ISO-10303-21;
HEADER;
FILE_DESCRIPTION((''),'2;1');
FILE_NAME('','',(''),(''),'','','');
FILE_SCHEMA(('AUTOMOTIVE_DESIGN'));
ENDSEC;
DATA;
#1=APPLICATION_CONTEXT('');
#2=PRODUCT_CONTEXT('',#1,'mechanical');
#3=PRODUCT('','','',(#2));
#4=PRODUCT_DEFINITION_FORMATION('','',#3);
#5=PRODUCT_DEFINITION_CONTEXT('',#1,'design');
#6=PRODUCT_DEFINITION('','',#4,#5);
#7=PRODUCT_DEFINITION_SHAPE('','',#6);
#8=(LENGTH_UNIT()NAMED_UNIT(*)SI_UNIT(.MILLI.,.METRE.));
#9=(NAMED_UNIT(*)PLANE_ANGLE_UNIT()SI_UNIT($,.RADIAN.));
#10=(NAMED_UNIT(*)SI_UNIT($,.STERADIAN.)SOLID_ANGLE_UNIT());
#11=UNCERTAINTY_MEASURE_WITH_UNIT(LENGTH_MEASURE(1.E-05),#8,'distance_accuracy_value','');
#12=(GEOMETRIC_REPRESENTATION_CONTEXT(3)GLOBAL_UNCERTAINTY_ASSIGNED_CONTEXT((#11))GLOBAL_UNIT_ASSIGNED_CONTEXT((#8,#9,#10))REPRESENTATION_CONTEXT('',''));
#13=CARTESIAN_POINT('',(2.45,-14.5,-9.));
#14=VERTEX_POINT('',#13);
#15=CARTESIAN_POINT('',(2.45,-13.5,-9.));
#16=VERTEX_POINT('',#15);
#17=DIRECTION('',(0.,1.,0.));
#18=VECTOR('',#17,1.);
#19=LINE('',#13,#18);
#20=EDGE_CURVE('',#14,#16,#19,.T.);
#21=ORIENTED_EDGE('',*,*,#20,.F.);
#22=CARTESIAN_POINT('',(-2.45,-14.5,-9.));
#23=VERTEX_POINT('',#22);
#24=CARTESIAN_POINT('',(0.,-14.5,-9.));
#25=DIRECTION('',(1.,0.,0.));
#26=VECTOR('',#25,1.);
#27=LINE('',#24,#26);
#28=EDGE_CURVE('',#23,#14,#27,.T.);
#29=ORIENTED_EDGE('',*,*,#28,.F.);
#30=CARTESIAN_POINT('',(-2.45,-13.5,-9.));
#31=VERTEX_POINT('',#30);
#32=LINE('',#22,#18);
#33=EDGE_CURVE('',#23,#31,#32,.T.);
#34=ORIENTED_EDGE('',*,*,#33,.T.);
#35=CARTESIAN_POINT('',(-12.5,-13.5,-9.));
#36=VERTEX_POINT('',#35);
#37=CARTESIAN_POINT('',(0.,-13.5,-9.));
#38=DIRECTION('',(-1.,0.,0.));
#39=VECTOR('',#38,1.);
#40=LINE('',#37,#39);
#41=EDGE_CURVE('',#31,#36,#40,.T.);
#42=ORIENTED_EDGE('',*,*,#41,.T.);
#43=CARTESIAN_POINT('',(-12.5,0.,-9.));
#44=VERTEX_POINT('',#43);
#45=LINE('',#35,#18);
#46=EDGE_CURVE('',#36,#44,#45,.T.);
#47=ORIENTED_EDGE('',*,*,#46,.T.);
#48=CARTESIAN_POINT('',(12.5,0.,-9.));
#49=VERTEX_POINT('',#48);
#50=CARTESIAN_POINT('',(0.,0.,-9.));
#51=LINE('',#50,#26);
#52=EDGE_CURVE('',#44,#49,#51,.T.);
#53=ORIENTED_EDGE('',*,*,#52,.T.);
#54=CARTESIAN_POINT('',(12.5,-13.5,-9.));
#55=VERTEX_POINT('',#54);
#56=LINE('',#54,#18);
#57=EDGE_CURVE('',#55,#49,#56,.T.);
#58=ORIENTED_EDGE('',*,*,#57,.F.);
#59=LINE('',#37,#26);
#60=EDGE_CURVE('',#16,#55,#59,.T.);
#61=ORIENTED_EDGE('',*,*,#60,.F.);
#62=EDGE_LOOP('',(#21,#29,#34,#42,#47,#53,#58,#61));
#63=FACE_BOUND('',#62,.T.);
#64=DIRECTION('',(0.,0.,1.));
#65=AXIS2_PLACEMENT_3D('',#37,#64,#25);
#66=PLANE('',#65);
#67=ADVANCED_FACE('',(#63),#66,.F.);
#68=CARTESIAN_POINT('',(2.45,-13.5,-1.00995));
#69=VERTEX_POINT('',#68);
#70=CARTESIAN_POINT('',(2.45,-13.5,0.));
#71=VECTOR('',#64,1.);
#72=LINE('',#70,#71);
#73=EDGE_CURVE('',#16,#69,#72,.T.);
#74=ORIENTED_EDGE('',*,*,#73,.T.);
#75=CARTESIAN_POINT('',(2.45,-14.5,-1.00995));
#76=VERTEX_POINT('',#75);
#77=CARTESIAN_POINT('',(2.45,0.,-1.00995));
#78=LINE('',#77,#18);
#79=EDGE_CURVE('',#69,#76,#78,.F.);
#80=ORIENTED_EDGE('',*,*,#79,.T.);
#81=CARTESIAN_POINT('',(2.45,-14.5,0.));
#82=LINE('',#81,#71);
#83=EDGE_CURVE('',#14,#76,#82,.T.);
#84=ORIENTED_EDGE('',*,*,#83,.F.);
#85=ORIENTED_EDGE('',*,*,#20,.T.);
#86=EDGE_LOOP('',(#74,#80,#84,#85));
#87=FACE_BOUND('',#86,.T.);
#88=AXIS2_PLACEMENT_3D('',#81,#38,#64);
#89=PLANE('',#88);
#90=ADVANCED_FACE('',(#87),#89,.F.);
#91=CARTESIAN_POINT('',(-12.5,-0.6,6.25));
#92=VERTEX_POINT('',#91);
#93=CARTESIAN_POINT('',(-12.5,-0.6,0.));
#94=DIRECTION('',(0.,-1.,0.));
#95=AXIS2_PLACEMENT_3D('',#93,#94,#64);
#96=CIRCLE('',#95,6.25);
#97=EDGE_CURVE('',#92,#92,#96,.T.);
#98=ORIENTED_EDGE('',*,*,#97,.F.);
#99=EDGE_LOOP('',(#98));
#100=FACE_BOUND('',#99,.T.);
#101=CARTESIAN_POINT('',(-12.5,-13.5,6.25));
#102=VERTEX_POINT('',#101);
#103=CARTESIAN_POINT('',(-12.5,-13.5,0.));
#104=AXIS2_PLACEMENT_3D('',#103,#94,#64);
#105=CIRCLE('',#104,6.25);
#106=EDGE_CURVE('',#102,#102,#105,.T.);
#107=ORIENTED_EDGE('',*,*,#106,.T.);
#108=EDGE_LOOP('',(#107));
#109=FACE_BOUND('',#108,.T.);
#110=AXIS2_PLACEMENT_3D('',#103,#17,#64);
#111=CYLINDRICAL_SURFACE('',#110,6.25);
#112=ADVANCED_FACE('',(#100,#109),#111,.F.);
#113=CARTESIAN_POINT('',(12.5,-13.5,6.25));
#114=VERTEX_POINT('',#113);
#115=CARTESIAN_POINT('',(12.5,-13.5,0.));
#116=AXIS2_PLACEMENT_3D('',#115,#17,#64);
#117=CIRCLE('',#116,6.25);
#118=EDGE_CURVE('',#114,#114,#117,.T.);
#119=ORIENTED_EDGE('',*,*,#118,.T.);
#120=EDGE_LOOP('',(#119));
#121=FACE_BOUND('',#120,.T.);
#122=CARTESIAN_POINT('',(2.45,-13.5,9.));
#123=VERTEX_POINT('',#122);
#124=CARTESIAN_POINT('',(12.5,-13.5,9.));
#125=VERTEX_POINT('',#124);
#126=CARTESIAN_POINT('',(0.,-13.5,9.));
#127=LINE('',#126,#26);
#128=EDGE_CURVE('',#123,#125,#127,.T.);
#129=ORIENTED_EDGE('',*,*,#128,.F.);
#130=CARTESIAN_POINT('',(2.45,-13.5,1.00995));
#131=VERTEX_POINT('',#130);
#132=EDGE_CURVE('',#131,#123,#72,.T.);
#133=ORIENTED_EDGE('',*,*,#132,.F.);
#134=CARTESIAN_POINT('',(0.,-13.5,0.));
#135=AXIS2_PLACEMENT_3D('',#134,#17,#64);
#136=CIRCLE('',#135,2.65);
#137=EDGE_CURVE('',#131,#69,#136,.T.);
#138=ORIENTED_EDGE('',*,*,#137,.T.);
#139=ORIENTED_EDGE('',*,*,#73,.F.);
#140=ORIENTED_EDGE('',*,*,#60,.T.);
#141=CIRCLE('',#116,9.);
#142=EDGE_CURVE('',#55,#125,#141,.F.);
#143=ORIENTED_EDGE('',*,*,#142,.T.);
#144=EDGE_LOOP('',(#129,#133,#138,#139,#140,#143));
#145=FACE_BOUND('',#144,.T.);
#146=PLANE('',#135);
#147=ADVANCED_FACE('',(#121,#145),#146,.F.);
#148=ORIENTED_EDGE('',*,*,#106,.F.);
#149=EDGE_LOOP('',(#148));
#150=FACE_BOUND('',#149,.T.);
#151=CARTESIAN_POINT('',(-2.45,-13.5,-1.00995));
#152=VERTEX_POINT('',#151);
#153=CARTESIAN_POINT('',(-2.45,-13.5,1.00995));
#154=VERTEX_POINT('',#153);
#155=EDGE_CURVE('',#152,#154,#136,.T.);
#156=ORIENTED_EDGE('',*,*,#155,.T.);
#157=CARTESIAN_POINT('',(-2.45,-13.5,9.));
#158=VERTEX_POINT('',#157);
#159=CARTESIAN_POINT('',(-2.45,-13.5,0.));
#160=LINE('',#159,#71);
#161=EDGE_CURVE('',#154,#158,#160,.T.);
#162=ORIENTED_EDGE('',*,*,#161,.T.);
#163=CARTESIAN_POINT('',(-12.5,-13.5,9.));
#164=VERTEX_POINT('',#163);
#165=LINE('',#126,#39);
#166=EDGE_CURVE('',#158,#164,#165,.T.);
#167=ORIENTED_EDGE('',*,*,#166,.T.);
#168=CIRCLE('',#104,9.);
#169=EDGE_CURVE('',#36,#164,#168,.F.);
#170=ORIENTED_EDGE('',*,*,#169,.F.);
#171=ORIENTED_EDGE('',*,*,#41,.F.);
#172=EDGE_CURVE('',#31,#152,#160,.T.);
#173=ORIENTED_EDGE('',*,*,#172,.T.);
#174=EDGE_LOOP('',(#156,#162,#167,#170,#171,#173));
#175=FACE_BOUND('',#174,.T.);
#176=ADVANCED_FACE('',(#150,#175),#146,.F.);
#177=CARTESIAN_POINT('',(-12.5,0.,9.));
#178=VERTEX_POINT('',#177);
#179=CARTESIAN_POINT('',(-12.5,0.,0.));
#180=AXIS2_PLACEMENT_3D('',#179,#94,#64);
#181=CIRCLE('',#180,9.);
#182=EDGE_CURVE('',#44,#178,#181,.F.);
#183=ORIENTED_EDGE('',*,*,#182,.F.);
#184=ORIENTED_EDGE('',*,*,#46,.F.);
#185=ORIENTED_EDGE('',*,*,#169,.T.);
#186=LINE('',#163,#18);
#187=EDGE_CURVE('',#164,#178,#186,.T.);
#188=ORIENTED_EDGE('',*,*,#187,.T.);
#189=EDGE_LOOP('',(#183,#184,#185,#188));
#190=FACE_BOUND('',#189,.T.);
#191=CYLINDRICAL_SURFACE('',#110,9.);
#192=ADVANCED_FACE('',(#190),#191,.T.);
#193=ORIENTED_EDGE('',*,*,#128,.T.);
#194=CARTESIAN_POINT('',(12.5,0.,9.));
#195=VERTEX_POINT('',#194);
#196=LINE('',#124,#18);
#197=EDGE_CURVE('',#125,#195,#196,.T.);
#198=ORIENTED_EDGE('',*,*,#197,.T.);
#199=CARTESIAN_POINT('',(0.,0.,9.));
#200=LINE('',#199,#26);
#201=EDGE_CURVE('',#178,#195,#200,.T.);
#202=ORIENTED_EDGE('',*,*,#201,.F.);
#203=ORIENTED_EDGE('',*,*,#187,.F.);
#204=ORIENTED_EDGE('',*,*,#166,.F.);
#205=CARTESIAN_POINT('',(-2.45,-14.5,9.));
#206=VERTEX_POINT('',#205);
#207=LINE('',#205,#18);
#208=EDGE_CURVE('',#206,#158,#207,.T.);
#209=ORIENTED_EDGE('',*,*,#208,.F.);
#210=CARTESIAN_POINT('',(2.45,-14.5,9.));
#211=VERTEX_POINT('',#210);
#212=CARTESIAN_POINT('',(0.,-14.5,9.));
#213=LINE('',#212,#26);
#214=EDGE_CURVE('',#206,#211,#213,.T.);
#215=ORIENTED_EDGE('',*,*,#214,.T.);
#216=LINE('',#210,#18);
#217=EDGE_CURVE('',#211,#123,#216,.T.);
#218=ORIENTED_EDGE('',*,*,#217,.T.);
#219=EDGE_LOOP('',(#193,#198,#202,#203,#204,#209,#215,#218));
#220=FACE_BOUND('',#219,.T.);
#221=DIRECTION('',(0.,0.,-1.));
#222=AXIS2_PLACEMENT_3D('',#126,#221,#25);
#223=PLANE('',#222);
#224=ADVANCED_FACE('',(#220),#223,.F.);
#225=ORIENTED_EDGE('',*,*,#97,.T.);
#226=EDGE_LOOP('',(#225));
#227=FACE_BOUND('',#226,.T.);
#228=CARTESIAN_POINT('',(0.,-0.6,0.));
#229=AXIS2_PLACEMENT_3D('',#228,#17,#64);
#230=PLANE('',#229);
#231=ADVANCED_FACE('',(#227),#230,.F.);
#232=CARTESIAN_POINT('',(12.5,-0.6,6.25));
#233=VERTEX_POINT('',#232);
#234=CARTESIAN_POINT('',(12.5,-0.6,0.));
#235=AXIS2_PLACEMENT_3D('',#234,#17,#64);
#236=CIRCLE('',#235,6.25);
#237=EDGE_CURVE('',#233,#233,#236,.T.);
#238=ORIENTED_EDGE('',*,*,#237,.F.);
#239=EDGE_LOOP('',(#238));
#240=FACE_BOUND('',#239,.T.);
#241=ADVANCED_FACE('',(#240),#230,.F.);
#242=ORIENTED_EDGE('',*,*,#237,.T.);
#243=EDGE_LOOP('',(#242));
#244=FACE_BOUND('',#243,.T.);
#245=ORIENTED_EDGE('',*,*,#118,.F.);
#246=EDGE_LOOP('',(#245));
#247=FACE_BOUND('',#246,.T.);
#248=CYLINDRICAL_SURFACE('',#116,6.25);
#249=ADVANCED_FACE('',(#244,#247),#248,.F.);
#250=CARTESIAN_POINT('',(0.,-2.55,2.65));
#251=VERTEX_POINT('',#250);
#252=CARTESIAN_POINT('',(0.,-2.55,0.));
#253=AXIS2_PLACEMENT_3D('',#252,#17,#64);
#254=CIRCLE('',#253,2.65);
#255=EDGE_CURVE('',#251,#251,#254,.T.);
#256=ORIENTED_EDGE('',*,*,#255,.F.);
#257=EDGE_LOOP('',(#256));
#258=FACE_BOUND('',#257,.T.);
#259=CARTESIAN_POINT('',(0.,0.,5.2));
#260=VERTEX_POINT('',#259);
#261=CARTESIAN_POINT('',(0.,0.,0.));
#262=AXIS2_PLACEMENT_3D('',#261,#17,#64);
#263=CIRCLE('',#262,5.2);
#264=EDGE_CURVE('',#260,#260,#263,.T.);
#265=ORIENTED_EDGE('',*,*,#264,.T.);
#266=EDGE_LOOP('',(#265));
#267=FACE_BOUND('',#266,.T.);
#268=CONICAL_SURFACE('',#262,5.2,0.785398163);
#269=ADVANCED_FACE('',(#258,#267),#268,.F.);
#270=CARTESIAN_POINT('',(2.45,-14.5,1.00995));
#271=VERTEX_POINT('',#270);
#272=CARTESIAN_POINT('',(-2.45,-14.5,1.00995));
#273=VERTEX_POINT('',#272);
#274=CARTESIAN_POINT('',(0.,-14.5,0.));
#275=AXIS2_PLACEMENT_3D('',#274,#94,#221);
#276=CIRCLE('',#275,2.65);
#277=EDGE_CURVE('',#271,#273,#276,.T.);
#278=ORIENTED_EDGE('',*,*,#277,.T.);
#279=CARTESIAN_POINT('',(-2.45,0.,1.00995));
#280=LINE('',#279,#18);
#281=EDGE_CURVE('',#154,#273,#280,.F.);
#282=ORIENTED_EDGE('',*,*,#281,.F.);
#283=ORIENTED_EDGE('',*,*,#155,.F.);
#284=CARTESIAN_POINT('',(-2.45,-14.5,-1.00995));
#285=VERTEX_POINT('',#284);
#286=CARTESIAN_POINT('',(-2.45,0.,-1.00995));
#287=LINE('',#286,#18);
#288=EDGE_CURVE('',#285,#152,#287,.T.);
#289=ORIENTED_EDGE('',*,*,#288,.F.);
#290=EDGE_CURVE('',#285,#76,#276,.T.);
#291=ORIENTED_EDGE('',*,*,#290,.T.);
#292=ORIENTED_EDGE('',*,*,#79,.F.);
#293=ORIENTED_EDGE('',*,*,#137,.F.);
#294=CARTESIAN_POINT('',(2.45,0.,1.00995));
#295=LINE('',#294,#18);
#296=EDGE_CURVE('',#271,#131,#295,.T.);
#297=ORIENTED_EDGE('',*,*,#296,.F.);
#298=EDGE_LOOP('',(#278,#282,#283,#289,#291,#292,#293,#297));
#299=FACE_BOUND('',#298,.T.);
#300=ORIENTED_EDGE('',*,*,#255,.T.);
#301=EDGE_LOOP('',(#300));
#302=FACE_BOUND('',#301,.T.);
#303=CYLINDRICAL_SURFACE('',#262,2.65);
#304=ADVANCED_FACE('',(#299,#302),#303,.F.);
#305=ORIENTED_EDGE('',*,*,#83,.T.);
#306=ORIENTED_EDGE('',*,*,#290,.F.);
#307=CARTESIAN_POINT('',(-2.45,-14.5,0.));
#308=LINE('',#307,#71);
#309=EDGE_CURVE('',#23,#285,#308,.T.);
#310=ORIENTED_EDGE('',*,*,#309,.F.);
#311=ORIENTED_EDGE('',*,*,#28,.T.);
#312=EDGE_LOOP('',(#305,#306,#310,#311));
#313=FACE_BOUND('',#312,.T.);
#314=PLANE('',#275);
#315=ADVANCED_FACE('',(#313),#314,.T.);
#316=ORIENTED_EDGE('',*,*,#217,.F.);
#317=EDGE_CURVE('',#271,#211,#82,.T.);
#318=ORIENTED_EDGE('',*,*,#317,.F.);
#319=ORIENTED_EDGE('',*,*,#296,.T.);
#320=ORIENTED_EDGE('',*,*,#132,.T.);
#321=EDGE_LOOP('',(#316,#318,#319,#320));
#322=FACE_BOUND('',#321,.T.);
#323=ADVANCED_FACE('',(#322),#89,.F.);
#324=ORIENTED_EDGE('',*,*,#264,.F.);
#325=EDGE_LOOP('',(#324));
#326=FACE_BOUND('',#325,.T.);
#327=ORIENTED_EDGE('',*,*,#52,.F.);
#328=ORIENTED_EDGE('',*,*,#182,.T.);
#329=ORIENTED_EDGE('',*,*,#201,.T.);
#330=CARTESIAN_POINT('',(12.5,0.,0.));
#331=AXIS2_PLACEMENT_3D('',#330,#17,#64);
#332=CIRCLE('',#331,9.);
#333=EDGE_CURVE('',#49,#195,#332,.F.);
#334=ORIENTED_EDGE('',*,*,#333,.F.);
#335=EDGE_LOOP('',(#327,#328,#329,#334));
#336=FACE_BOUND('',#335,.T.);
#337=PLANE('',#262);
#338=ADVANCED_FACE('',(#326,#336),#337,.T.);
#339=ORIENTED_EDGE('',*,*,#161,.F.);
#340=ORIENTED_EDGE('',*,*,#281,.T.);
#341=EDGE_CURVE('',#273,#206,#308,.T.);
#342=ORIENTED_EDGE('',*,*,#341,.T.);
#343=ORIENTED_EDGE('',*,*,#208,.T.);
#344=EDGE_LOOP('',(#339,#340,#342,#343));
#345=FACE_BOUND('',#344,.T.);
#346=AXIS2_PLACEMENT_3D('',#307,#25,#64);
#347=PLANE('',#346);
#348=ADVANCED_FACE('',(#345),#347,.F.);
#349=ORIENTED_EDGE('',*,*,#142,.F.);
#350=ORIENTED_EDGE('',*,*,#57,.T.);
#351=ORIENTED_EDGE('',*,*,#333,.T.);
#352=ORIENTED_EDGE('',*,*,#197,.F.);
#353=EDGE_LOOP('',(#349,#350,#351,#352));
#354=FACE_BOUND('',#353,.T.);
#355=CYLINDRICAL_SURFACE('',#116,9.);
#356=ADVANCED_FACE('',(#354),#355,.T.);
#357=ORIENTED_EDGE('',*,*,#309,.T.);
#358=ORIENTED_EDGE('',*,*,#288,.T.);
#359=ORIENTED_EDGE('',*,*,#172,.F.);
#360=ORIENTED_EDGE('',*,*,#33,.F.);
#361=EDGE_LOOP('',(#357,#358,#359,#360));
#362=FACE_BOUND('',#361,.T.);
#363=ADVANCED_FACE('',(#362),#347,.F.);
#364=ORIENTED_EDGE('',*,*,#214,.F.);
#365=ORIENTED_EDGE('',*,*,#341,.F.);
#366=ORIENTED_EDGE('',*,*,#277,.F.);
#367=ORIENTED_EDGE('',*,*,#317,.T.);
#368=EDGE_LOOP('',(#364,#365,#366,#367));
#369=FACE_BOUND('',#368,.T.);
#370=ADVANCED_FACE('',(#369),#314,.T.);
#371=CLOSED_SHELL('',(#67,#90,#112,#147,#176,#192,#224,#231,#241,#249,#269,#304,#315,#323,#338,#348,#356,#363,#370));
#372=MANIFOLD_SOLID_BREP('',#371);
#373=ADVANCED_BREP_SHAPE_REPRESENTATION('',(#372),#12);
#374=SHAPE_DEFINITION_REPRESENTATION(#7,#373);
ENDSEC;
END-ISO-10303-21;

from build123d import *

# Parameters (mm, degrees)
SKETCH1_W                                       = 2.45
SKETCH1_H                                       = 9
BOSS_EXTRUDE1_DEPTH                             = 13.5
BOSS_EXTRUDE2_DEPTH                             = 0.6
BOSS_EXTRUDE3_START                             = -13.5
SKETCH1_4_W                                     = 2.45
SKETCH1_4_H                                     = 9
BOSS_EXTRUDE3_DEPTH                             = 1
MIRROR1_START                                   = -13.5
MIRROR1_OUTLINE_R                               = 6.25
MIRROR1_DEPTH                                   = 13.5
MIRROR1_START_2                                 = -0.6
MIRROR1_2_OUTLINE_R                             = 6.25
MIRROR1_2_DEPTH                                 = 0.6
MIRROR1_START_3                                 = -14.5
MIRROR1_3_DEPTH                                 = 1
CSK_FOR_M5_FLAT_HEAD_MACHINE_SCREW1_D           = 5.3
CSK_FOR_M5_FLAT_HEAD_MACHINE_SCREW1_CSINK_D     = 10.4
CSK_FOR_M5_FLAT_HEAD_MACHINE_SCREW1_CSINK_ANGLE = 90


# Read off the part's stored shape, not the designer's step: Mirror1
with BuildPart() as part:
    # Sketch1 → Boss-Extrude1 (new body)
    with BuildSketch(Plane(origin=(0, 0, 0), x_dir=(1, 0, 0), z_dir=(0, 1, 0))):
        with Locations((1.225, 4.5)):
            Rectangle(SKETCH1_W, SKETCH1_H)
        with BuildLine():
            Line((2.45, 9), (2.45, 0))
            Line((2.45, 0), (6.25, 0))
            ThreePointArc((6.25, 0), (12.5, 6.25), (18.75, 0))
            Line((18.75, 0), (21.5, 0))
            ThreePointArc((21.5, 0), (18.863961031, 6.363961031), (12.5, 9))
            Line((12.5, 9), (2.45, 9))
        make_face()
    extrude(amount=-BOSS_EXTRUDE1_DEPTH)

    # Sketch1<3> → Boss-Extrude2 (add)
    with BuildSketch(Plane(origin=(0, 0, 0), x_dir=(1, 0, 0), z_dir=(0, 1, 0))):
        with BuildLine():
            ThreePointArc((18.75, 0), (12.5, 6.25), (6.25, 0))
            Line((6.25, 0), (18.75, 0))
        make_face()
    extrude(amount=-BOSS_EXTRUDE2_DEPTH)

    # Sketch1<4> → Boss-Extrude3 (add)
    with BuildSketch(Plane(origin=(0, 0, 0), x_dir=(1, 0, 0), z_dir=(0, 1, 0)).offset(BOSS_EXTRUDE3_START)):
        with Locations((1.225, 4.5)):
            Rectangle(SKETCH1_4_W, SKETCH1_4_H)
    extrude(amount=-BOSS_EXTRUDE3_DEPTH)

    # Mirror1 outline → Mirror1 (add)
    with BuildSketch(Plane(origin=(0, 0, 0), x_dir=(1, 0, 0), z_dir=(0, 1, 0)).offset(MIRROR1_START)):
        with BuildLine():
            Line((21.5, 0), (18.75, 0))
            ThreePointArc((18.75, 0), (12.5, -6.25), (6.25, 0))
            Line((6.25, 0), (0, 0))
            Line((0, 0), (0, 9))
            Line((0, 9), (-12.5, 9))
            ThreePointArc((-12.5, 9), (-21.5, 0), (-12.5, -9))
            Line((-12.5, -9), (12.5, -9))
            ThreePointArc((12.5, -9), (18.863961031, -6.363961031), (21.5, 0))
        make_face()
        with Locations((-12.5, 0)):
            Circle(MIRROR1_OUTLINE_R, mode=Mode.SUBTRACT)
    extrude(amount=MIRROR1_DEPTH)

    # Mirror1 2 outline → Mirror1 2 (add)
    with BuildSketch(Plane(origin=(0, 0, 0), x_dir=(1, 0, 0), z_dir=(0, 1, 0)).offset(MIRROR1_START_2)):
        with BuildLine():
            ThreePointArc((6.25, 0), (12.5, -6.25), (18.75, 0))
            Line((18.75, 0), (6.25, 0))
        make_face()
        with Locations((-12.5, 0)):
            Circle(MIRROR1_2_OUTLINE_R)
    extrude(amount=MIRROR1_2_DEPTH)

    # Mirror1 3 outline → Mirror1 3 (add)
    with BuildSketch(Plane(origin=(0, 0, 0), x_dir=(1, 0, 0), z_dir=(0, 1, 0)).offset(MIRROR1_START_3)):
        Polygon((2.45, -9), (2.45, 0), (0, 0), (0, 9), (-2.45, 9), (-2.45, -9), align=None)
    extrude(amount=MIRROR1_3_DEPTH)

    # CSK for M5 Flat Head Machine Screw1 (through all)
    with Locations(Plane(origin=(0, 0, 0), x_dir=(1, 0, 0), z_dir=(0, 1, 0))):
        with Locations((0, 0)):
            CounterSinkHole(CSK_FOR_M5_FLAT_HEAD_MACHINE_SCREW1_D / 2, CSK_FOR_M5_FLAT_HEAD_MACHINE_SCREW1_CSINK_D / 2, counter_sink_angle=CSK_FOR_M5_FLAT_HEAD_MACHINE_SCREW1_CSINK_ANGLE)


solid = part.part
